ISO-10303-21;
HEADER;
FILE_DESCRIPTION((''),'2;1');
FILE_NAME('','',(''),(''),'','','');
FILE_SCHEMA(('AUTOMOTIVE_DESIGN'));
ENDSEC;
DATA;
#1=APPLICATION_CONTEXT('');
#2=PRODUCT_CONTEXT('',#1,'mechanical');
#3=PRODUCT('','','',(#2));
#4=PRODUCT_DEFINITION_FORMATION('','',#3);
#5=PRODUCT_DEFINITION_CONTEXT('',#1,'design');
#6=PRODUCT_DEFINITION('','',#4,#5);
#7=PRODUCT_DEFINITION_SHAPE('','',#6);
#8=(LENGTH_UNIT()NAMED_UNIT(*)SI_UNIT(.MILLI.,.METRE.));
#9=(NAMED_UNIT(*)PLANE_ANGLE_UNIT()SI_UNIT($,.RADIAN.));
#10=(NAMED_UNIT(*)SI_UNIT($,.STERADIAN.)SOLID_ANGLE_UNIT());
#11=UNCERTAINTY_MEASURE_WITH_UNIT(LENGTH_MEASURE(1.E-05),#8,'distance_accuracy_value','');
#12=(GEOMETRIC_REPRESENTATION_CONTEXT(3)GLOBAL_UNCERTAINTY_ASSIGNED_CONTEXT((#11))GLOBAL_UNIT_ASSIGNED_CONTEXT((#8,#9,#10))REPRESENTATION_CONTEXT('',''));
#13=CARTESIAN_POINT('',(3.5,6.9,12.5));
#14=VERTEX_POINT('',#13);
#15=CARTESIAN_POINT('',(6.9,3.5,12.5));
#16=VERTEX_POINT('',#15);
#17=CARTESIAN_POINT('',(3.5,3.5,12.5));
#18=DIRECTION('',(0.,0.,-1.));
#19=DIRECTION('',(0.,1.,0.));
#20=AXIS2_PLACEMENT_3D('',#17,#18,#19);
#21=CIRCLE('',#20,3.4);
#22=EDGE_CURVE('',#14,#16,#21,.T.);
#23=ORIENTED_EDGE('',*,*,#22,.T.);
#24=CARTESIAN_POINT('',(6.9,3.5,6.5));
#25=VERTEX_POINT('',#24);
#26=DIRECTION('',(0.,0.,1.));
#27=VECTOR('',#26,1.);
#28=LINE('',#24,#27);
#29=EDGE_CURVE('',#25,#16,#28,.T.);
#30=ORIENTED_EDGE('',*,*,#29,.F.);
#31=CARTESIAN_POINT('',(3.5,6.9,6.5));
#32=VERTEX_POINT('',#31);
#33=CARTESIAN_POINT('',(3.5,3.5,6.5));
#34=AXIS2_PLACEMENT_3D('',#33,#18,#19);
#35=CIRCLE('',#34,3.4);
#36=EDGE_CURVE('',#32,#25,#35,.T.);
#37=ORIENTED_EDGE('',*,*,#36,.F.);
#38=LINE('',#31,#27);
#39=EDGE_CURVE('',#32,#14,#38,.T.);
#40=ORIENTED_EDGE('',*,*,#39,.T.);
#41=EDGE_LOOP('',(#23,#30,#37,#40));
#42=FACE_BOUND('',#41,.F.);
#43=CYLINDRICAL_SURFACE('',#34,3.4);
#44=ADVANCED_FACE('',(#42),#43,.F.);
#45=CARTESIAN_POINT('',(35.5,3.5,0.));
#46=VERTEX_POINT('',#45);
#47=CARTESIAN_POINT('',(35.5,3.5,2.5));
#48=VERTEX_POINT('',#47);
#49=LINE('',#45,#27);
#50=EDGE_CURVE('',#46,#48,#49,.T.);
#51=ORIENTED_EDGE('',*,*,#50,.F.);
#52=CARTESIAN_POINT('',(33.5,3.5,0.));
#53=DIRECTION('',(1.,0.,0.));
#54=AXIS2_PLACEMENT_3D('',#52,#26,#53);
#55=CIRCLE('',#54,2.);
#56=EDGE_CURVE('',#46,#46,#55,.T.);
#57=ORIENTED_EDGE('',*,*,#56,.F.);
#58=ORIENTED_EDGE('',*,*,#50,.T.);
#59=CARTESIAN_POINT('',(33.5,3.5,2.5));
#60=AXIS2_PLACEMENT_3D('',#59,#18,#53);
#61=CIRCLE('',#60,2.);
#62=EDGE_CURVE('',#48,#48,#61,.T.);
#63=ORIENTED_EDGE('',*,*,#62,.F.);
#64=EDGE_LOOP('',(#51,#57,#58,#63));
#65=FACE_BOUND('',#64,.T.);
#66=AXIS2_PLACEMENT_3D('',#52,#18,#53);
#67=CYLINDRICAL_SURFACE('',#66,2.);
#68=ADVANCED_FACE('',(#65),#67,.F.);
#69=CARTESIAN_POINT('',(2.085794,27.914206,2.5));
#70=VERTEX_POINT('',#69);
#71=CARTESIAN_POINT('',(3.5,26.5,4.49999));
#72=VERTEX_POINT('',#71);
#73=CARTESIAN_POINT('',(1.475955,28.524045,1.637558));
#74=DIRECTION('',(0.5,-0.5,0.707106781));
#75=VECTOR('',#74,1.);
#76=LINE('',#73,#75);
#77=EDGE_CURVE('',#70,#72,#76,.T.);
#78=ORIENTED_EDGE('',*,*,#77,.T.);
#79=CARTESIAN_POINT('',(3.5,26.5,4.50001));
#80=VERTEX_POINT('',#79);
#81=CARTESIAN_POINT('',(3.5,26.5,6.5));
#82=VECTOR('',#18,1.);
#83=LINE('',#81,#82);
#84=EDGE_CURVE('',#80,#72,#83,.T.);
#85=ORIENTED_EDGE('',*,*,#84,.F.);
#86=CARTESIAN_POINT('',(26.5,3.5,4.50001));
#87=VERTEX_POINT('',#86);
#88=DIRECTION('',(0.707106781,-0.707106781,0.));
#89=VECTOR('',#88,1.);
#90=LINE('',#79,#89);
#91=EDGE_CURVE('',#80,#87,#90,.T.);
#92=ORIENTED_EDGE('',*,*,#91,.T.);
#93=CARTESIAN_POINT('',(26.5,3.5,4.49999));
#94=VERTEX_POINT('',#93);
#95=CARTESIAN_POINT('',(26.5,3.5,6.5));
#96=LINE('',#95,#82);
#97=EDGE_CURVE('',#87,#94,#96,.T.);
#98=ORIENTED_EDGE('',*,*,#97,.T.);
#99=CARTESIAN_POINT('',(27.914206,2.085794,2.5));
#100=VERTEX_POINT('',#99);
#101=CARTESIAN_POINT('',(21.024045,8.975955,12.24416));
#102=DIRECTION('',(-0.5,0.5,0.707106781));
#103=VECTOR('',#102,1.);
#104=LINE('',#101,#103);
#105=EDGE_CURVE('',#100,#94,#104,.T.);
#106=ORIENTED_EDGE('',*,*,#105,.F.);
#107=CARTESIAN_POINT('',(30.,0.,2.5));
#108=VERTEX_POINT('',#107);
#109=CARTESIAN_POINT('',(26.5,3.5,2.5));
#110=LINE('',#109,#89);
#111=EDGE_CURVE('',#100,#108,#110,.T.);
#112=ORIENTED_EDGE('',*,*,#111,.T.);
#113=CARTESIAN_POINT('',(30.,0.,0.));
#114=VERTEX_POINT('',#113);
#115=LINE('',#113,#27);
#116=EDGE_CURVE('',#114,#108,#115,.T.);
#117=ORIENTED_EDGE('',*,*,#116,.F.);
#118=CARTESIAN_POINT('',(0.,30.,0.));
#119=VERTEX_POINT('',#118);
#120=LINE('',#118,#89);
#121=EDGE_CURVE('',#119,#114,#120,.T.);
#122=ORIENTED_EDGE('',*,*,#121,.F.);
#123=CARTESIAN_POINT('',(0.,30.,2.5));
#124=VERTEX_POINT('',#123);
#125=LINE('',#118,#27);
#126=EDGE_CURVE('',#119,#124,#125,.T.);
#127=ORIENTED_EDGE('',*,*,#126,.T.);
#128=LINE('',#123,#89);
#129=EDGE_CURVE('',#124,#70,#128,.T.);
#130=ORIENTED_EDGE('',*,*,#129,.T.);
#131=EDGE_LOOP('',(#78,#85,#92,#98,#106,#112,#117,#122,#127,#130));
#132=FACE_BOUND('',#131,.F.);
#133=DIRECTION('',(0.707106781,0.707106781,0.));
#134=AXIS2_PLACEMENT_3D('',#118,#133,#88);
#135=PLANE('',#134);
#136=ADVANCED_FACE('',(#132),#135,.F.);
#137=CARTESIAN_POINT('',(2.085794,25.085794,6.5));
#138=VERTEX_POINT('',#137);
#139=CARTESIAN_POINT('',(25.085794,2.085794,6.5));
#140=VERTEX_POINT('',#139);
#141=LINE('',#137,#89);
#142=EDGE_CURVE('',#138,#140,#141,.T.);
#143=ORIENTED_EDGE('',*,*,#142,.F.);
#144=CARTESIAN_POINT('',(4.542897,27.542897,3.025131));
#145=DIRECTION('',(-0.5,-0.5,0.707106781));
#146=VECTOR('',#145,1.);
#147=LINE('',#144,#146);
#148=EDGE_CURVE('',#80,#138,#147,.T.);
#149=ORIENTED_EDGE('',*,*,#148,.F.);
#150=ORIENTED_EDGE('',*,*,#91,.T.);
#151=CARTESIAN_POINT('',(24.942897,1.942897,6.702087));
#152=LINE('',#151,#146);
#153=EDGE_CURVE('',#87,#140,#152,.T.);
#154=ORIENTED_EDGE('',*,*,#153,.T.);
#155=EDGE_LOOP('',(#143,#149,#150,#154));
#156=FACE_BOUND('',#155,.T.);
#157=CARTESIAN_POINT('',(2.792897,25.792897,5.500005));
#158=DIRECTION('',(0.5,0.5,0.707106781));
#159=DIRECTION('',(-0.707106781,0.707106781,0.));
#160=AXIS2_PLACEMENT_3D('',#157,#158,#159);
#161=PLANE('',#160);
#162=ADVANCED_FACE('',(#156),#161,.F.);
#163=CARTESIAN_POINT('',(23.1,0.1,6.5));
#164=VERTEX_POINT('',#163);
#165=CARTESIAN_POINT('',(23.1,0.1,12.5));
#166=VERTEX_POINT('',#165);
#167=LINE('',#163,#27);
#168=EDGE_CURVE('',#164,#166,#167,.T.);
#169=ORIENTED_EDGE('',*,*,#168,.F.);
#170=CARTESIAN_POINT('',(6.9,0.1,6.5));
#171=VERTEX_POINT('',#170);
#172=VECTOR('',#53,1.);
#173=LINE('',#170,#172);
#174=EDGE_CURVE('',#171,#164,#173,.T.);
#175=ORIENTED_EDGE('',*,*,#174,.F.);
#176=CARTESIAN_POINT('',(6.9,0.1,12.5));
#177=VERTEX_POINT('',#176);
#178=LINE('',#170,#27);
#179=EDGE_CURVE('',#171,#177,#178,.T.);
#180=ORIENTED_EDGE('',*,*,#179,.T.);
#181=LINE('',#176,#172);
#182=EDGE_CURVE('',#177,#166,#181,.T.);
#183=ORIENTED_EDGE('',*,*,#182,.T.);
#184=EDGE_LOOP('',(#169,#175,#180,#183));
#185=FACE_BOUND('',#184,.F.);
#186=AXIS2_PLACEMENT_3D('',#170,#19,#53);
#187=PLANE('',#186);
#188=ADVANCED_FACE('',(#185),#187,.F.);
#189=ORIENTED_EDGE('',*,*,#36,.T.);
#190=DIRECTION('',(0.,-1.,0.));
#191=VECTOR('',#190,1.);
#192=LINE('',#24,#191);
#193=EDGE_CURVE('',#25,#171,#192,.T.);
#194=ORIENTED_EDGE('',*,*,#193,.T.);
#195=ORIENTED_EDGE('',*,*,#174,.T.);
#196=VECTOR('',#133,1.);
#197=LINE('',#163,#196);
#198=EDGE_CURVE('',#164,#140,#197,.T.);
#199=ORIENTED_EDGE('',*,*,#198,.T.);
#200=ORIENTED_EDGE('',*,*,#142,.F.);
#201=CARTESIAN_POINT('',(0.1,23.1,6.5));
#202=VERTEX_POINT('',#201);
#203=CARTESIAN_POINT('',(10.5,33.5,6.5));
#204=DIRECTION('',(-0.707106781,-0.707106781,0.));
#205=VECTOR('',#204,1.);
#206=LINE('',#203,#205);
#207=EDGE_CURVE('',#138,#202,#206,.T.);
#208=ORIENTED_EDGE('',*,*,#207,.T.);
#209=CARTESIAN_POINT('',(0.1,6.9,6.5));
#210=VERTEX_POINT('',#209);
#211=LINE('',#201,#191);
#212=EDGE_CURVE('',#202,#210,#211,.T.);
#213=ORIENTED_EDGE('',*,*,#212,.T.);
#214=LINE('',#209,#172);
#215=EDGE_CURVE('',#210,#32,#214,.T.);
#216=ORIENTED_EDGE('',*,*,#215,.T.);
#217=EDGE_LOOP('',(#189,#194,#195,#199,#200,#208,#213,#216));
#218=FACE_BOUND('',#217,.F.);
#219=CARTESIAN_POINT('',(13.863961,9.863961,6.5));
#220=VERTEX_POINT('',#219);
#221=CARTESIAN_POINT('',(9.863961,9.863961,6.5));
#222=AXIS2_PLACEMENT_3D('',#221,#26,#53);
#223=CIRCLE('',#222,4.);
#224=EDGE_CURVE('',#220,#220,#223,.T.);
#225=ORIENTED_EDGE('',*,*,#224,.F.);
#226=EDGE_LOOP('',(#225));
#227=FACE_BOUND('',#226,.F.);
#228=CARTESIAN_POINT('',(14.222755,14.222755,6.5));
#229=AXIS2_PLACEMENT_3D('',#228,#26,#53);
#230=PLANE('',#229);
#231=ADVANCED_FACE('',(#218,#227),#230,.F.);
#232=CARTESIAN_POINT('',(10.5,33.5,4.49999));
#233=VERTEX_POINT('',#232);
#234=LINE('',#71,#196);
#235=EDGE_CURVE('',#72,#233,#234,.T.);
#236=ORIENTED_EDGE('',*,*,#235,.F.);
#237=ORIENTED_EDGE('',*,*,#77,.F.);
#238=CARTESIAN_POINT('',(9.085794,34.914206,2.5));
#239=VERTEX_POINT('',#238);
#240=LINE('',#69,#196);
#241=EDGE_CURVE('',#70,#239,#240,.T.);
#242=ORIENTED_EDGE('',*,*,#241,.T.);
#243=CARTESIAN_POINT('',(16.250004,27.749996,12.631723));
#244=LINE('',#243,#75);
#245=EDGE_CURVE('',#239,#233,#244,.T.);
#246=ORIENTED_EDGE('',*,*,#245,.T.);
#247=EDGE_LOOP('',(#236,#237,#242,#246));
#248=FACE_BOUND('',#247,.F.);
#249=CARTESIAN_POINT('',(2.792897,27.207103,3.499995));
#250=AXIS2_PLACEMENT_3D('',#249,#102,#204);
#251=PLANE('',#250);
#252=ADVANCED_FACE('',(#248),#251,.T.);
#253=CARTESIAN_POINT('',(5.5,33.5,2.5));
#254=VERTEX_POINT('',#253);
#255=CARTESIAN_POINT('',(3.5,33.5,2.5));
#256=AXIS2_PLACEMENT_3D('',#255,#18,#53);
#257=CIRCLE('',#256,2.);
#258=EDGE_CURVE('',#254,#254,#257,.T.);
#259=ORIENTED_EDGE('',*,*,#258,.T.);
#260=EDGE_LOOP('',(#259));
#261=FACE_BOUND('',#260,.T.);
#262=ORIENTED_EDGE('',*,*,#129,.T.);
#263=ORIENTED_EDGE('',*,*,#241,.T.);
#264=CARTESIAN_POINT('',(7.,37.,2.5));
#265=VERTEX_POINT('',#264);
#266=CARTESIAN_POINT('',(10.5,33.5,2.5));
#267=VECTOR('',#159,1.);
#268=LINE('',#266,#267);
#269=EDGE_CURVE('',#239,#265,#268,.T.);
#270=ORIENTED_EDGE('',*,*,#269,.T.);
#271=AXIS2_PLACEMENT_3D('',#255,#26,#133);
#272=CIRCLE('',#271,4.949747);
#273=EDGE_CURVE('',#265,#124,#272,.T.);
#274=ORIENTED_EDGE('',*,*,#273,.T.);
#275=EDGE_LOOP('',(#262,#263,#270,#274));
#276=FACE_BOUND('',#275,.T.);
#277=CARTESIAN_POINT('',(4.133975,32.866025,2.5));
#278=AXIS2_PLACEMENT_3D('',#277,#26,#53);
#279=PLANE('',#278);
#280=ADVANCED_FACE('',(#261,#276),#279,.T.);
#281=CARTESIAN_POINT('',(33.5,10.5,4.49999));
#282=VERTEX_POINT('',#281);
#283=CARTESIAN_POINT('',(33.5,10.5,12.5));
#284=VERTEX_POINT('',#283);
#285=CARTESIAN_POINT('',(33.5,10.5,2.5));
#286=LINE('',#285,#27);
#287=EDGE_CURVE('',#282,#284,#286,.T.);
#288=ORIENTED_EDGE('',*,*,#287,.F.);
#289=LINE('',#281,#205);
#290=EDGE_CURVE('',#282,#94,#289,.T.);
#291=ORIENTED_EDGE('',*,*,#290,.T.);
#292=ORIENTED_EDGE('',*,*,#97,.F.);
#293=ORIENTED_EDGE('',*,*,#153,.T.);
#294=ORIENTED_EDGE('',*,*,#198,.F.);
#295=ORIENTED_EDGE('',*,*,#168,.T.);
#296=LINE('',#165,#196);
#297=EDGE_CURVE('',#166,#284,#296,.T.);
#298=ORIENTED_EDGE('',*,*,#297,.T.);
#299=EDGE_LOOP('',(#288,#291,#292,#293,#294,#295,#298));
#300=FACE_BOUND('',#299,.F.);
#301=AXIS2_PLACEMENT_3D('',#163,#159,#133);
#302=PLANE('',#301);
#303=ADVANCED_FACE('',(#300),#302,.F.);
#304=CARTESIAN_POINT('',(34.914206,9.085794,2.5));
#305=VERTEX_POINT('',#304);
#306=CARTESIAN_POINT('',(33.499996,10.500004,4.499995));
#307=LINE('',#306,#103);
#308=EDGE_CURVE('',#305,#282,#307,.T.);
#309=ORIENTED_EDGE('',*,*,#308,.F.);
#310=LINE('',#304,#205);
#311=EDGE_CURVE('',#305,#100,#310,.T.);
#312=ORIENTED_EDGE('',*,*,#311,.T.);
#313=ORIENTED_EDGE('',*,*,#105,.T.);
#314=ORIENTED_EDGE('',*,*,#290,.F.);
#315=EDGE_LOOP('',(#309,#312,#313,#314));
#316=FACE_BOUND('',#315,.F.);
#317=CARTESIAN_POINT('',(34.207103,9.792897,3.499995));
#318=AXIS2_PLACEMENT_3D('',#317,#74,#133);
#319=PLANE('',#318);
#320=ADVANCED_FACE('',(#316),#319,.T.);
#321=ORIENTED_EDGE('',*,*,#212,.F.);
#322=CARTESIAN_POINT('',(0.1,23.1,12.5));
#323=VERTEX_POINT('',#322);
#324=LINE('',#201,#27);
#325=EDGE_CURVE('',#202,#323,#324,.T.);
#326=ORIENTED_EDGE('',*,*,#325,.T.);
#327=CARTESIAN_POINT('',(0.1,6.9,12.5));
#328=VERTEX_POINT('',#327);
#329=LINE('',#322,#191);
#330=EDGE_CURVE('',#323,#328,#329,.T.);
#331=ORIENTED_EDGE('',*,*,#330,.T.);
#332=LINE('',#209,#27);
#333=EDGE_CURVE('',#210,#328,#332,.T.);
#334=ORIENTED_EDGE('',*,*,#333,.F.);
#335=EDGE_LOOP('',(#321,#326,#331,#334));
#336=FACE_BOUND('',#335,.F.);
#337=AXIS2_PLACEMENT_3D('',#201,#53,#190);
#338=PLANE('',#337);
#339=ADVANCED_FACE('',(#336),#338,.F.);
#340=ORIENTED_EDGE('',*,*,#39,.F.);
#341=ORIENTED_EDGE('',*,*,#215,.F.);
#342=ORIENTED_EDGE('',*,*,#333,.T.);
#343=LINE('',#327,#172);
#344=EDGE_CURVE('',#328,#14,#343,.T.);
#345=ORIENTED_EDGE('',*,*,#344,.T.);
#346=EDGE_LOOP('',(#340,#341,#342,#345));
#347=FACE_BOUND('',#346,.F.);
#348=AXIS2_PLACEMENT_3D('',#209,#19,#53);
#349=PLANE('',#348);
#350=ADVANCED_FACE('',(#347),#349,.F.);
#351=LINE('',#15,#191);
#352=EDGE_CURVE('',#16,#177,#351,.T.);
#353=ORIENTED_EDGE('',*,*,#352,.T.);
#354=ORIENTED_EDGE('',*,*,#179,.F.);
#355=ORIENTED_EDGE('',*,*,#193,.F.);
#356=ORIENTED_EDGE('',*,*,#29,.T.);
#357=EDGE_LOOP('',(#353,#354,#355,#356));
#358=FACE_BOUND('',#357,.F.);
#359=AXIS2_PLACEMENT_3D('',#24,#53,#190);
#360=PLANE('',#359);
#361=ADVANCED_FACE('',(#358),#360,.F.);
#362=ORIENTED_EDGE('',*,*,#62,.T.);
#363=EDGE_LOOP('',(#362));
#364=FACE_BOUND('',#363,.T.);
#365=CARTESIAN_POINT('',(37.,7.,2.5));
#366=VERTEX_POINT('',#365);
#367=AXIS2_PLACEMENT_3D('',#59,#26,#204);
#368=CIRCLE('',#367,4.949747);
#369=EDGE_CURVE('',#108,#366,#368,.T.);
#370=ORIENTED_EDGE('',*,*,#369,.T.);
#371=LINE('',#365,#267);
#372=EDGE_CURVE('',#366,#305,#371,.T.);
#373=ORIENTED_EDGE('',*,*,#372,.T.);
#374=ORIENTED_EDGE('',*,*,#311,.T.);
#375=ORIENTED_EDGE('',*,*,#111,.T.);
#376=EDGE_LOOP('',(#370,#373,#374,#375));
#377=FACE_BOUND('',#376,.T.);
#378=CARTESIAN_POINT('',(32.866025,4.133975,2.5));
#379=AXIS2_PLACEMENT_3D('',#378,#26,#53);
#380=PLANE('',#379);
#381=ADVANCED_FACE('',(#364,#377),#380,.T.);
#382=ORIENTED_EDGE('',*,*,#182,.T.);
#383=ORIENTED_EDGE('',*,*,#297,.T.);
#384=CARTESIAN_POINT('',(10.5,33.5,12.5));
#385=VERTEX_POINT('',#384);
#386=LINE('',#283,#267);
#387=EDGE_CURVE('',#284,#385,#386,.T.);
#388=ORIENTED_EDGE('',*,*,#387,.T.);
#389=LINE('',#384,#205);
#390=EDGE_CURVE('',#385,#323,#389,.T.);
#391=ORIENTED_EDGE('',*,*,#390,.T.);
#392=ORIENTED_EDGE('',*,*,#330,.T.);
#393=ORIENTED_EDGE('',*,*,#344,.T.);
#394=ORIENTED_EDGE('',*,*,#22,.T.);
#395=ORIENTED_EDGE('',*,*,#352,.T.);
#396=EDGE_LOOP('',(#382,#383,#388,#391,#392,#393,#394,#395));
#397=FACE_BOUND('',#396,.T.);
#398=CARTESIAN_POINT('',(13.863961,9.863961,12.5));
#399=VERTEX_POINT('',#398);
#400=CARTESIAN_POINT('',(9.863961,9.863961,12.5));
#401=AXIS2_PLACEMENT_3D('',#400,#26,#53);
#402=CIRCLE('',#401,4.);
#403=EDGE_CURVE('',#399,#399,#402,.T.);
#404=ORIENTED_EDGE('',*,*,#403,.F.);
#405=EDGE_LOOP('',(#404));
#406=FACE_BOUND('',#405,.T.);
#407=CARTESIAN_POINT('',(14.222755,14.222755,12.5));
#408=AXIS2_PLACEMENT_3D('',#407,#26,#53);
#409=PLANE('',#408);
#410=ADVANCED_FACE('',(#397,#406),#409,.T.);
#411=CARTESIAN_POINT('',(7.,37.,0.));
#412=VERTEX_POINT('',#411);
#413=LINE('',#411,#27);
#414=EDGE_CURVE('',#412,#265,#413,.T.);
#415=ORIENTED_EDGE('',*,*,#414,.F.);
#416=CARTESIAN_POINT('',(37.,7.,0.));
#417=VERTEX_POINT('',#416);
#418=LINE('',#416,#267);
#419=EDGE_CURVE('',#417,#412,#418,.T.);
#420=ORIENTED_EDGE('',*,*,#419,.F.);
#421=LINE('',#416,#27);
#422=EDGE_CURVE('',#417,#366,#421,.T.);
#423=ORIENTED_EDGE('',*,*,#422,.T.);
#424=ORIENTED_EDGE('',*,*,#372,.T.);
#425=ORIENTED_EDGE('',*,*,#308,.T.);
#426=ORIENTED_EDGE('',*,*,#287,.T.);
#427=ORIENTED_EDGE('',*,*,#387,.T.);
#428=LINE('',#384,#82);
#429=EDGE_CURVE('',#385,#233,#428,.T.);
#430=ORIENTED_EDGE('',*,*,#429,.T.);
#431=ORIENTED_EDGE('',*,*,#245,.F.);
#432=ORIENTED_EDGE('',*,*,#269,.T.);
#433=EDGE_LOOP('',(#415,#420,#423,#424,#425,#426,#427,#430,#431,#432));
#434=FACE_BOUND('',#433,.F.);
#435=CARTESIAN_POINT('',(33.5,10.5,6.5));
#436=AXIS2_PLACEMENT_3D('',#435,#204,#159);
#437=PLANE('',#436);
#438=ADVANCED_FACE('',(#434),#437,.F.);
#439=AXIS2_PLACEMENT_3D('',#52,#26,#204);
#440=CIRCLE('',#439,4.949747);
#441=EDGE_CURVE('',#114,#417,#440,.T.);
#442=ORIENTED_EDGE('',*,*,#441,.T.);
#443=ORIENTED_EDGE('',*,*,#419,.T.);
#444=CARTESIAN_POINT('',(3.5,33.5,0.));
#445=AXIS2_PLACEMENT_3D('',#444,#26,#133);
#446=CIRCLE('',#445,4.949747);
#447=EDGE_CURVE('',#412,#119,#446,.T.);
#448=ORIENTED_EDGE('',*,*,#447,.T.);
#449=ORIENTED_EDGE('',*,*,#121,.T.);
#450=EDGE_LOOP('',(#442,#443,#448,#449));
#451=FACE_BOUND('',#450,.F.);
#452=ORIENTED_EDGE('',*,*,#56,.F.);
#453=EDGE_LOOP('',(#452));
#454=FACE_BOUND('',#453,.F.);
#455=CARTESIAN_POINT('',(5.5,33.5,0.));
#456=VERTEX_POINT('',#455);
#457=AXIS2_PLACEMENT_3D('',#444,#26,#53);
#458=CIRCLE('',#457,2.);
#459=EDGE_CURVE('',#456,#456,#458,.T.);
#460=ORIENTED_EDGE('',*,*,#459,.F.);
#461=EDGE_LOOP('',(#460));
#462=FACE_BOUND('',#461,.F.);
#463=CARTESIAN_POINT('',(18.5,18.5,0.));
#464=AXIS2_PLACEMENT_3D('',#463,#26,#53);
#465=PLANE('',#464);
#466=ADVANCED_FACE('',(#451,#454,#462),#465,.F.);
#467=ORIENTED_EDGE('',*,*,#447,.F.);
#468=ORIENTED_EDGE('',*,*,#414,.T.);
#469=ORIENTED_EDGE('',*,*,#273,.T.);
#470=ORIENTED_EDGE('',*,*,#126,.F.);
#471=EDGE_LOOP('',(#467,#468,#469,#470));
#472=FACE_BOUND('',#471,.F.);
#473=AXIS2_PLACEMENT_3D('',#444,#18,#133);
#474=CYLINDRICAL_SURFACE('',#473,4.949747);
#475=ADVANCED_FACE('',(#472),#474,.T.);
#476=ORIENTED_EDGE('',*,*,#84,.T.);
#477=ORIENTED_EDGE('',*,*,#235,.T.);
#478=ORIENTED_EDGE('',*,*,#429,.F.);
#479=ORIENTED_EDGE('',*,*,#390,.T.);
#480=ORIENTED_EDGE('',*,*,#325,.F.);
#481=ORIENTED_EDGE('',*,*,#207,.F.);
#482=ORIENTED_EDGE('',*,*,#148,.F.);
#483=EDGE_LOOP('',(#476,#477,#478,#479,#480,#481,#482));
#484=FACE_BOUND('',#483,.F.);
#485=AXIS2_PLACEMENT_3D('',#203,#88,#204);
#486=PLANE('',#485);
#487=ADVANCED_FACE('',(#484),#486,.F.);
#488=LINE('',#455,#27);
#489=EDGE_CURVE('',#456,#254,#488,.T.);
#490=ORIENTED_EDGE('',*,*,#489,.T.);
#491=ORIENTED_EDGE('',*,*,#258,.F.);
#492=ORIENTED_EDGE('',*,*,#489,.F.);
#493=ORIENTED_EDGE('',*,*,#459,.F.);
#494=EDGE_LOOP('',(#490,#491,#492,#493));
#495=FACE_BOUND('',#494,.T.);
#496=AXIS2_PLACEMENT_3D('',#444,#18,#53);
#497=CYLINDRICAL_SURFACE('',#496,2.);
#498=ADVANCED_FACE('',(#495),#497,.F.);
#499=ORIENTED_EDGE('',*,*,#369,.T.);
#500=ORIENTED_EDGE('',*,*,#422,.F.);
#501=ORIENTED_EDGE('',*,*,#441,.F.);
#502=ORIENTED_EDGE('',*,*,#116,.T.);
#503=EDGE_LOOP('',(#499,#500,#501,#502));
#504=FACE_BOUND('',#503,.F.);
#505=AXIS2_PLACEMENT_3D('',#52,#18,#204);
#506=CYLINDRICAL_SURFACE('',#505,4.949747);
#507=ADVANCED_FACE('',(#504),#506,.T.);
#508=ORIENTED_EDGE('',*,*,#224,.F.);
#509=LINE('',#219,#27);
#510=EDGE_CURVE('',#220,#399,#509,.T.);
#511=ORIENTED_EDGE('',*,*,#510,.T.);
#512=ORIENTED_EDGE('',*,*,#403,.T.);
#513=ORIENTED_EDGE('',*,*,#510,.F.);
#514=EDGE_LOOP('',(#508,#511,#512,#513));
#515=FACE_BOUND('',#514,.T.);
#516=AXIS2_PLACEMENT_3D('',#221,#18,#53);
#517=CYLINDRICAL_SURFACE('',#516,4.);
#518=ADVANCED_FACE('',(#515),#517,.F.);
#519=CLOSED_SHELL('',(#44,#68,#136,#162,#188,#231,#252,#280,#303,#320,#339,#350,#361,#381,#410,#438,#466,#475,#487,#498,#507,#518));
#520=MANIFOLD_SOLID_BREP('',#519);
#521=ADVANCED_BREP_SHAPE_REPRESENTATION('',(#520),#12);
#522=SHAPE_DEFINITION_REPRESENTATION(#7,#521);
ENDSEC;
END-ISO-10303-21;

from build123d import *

# Parameters (mm, degrees)
F0_R     = 2
F1_DEPTH = 6.5
F3_DEPTH = 4
F4_R     = 4
F5_DEPTH = 6
F6_SIZE  = 1.99999


# Not quite as in the source:
# - a fillet or chamfer is up to 0.001 mm smaller than in the source, because OpenCascade refuses the exact size


with BuildPart() as f1:
    # F0 (on Top) → F1 (new body)
    with BuildSketch(Plane.XY):
        with BuildLine():
            Line((37, 7), (7, 37))
            ThreePointArc((7, 37), (0, 37), (0, 30))
            Line((0, 30), (30, 0))
            ThreePointArc((30, 0), (37, 0), (37, 7))
        make_face()
        with Locations((33.5, 3.5)):
            Circle(F0_R, mode=Mode.SUBTRACT)
        with Locations((3.5, 33.5)):
            Circle(F0_R, mode=Mode.SUBTRACT)
    extrude(amount=F1_DEPTH)

    # F2 (on face) → F3 (cut)
    with BuildSketch(Plane.XY.offset(6.5)):
        with BuildLine():
            Line((10.5, 33.5), (7, 37))
            ThreePointArc((7, 37), (0, 37), (0, 30))
            Line((0, 30), (3.5, 26.5))
            Line((3.5, 26.5), (10.5, 33.5))
        make_face()
        with BuildLine():
            Line((26.5, 3.5), (30, 0))
            ThreePointArc((30, 0), (37, 0), (37, 7))
            Line((37, 7), (33.5, 10.5))
            Line((33.5, 10.5), (26.5, 3.5))
        make_face()
    extrude(amount=-F3_DEPTH, mode=Mode.SUBTRACT)

    # F4 (on face) → F5 (join)
    with BuildSketch(Plane.XY.offset(6.5)):
        with BuildLine():
            ThreePointArc((3.5, 6.9), (5.904163056, 5.904163056), (6.9, 3.5))
            Line((6.9, 3.5), (6.9, 0.1))
            Line((6.9, 0.1), (23.1, 0.1))
            Line((23.1, 0.1), (33.5, 10.5))
            Line((33.5, 10.5), (10.5, 33.5))
            Line((10.5, 33.5), (0.1, 23.1))
            Line((0.1, 23.1), (0.1, 6.9))
            Line((0.1, 6.9), (3.5, 6.9))
        make_face()
        with Locations((9.8639610307, 9.8639610307)):
            Circle(F4_R, mode=Mode.SUBTRACT)
    extrude(amount=F5_DEPTH)

    # F6 (size 2 in the source; OpenCascade refuses exactly that, so slightly less here)
    f6_edges = [f1.edges().sort_by_distance(p)[0] for p in [
        (7, 30, 2.5),
        (15, 15, 6.5),
        (30, 7, 2.5),
    ]]
    chamfer(f6_edges, length=F6_SIZE)


solid = f1.part
